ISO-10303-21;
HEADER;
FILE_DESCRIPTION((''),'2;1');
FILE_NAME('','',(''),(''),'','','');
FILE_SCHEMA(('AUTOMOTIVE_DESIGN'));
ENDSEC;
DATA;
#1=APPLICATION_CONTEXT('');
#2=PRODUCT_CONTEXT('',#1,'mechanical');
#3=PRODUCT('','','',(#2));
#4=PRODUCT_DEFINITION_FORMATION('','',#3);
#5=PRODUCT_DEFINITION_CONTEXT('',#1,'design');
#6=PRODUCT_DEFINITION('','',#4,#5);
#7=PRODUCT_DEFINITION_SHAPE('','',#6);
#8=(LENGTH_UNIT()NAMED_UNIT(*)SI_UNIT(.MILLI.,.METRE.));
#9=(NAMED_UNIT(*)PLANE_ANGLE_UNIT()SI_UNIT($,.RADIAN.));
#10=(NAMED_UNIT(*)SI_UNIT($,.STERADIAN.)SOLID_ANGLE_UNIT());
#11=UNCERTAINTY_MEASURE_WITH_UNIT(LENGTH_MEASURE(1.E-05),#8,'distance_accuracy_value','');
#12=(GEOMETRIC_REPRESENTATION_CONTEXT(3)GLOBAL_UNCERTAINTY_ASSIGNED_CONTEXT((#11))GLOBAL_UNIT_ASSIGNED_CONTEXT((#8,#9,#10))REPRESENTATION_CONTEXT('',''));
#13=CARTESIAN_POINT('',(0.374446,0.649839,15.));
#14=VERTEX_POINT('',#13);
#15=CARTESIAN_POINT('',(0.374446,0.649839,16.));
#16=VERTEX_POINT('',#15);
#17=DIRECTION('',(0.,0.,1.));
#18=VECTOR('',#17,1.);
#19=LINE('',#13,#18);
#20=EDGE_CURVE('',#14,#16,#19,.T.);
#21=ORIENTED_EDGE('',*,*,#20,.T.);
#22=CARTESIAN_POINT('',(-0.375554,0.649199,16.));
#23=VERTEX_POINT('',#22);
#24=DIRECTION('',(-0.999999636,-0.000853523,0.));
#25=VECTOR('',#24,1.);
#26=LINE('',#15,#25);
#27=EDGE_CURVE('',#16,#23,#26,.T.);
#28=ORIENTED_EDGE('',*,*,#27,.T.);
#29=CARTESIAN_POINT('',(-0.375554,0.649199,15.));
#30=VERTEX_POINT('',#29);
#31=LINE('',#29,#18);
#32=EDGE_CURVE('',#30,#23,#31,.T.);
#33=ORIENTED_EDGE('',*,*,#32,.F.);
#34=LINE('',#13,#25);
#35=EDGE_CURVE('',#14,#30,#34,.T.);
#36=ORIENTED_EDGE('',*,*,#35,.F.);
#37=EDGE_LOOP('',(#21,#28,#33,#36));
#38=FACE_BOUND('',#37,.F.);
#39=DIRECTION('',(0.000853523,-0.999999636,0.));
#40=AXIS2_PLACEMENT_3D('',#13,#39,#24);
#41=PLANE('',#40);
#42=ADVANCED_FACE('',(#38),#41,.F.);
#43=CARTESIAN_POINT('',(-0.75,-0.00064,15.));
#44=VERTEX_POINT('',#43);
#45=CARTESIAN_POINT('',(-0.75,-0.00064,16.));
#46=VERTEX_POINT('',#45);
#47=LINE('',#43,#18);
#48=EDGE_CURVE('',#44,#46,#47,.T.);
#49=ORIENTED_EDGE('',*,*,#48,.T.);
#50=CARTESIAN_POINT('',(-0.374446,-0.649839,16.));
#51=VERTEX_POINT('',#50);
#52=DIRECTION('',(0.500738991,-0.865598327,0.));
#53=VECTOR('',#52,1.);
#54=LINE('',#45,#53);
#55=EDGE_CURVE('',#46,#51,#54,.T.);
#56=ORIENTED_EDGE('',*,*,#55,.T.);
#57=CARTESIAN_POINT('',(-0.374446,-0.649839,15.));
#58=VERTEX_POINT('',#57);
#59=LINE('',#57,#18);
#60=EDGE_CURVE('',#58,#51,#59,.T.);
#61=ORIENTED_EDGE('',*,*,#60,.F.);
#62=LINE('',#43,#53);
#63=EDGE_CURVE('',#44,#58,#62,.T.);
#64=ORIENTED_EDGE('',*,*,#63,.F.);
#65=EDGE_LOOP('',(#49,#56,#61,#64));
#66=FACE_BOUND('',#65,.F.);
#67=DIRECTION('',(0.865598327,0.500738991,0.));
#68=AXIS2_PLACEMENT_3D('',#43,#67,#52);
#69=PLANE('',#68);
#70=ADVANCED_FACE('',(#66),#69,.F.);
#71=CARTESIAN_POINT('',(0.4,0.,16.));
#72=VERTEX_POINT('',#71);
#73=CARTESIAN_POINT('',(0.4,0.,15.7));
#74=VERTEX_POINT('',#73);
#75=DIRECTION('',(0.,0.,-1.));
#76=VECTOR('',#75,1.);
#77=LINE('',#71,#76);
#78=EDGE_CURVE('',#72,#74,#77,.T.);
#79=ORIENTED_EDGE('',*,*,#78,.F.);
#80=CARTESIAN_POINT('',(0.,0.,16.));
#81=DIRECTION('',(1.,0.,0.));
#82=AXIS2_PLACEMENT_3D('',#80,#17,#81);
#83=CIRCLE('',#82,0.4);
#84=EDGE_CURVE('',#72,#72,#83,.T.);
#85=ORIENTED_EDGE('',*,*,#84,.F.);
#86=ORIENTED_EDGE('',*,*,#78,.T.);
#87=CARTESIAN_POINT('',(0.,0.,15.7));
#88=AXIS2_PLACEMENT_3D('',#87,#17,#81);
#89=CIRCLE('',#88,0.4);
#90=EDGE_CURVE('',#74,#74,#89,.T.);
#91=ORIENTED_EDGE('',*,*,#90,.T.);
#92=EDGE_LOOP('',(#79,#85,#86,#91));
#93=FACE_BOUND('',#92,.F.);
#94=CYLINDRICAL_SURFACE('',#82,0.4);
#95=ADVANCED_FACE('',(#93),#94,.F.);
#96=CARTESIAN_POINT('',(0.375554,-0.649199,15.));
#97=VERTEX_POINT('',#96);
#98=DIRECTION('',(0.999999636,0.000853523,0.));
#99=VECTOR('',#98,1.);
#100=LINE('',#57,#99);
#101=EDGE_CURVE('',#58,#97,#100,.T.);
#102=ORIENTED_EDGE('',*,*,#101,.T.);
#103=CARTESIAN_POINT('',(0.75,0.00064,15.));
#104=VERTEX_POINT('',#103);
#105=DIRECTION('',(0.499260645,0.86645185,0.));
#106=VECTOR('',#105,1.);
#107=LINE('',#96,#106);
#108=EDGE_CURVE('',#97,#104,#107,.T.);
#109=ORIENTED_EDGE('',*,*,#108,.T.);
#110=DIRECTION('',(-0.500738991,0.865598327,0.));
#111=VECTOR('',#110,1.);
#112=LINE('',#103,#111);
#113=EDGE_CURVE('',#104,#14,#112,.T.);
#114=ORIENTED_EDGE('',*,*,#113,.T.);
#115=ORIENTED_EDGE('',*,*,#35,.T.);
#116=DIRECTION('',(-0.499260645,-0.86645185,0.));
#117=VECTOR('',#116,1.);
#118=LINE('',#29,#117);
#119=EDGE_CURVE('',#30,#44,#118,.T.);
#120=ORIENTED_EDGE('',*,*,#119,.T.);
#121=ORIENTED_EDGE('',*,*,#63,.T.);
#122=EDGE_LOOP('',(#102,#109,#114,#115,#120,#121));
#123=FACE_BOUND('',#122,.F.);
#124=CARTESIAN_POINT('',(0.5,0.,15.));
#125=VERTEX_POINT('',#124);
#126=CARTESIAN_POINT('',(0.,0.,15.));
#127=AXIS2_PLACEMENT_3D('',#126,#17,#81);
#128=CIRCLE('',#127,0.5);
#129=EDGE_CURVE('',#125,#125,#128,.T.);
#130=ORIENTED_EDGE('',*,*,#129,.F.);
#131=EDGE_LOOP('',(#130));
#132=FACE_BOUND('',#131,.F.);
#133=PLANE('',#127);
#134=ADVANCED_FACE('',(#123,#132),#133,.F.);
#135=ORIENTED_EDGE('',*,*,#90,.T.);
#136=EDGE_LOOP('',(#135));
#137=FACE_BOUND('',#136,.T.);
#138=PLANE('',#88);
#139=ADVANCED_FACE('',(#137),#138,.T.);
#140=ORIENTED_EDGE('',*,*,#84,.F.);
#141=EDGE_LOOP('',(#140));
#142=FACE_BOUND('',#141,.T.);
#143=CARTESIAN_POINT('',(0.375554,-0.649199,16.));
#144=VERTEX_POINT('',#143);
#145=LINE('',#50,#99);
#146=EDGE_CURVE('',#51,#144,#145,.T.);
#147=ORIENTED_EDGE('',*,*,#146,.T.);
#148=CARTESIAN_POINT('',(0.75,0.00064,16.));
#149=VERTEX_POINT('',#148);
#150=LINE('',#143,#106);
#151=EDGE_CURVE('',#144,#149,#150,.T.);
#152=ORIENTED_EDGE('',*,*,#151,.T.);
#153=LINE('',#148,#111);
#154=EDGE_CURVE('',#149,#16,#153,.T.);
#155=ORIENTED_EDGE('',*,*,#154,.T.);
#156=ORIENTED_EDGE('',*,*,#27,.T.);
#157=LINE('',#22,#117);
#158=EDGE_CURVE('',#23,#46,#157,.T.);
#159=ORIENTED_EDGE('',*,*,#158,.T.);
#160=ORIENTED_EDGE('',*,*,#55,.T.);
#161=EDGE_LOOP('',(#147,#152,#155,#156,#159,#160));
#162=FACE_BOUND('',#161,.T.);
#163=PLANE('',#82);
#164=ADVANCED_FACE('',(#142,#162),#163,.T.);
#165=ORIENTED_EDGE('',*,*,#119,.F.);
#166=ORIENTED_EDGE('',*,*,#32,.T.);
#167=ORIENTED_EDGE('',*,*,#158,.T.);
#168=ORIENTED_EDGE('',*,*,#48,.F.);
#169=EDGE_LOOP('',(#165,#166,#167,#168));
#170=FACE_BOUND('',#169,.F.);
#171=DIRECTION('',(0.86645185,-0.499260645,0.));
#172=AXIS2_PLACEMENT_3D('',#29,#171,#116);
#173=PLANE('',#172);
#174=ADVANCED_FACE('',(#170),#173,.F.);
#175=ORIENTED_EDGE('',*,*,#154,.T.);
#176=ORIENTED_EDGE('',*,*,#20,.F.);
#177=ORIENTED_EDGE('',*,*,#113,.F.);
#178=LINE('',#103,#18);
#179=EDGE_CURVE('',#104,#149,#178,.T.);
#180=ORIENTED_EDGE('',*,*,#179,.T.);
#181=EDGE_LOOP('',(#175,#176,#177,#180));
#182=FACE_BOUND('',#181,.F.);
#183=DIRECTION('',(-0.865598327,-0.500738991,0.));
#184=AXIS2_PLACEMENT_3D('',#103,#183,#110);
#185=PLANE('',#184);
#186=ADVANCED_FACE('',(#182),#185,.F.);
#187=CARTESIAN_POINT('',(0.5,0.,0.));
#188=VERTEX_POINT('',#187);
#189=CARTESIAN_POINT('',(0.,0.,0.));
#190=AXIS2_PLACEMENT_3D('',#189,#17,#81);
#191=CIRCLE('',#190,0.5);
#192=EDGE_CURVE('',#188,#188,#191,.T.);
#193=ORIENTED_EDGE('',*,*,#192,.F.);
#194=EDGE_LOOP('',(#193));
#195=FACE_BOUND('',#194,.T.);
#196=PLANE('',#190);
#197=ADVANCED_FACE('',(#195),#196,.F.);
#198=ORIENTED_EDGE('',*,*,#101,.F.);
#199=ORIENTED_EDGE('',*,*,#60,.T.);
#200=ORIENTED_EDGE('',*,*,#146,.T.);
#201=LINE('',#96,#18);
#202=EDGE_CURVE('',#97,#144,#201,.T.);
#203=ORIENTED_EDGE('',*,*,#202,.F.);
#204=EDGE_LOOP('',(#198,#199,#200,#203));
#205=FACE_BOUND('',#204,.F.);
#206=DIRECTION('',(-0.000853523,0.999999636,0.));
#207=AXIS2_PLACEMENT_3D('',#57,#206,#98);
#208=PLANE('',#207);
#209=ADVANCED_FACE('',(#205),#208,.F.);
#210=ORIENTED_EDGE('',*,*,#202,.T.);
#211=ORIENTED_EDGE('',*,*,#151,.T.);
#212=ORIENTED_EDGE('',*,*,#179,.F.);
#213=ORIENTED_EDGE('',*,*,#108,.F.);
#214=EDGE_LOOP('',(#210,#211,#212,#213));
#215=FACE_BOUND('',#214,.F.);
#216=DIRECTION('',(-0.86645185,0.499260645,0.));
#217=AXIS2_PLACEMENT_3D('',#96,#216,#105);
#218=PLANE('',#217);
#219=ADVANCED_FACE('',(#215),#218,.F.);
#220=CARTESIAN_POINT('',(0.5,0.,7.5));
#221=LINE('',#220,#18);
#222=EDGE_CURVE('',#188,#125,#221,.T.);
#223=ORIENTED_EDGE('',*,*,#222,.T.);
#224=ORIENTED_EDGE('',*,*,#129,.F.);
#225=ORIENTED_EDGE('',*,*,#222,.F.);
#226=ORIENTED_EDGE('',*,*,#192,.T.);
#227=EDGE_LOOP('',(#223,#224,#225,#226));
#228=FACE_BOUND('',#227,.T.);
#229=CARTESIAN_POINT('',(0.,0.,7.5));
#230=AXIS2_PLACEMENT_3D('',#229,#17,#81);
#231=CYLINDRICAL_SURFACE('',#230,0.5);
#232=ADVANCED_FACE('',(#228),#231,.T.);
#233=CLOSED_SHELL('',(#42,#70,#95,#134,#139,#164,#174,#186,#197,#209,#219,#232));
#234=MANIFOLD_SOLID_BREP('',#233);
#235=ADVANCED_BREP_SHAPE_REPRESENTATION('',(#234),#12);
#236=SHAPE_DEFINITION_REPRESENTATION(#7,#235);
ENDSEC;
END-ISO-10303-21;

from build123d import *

# Parameters (mm, degrees)
F0_W     = 0.5
F0_H     = 15
F2_R     = 0.5
F3_DEPTH = 1
F4_R     = 0.4
F5_DEPTH = 0.3


with BuildPart() as f1:
    # F0 (on Front) → F1 (revolve)
    with BuildSketch(Plane.XZ):
        with Locations((0.25, 7.5)):
            Rectangle(F0_W, F0_H)
    revolve(axis=Axis((0, 0, 7.5), (0, 0, 1)))

    # F2 (on face) → F3 (join)
    with BuildSketch(Plane.XY.offset(15)):
        Polygon((0.75, 0.0006401425), (0.3744456203, 0.6498391241), (-0.3755543797, 0.6491989816), (-0.75, -0.0006401425), (-0.3744456203, -0.6498391241), (0.3755543797, -0.6491989816), align=None)
        Circle(F2_R, mode=Mode.SUBTRACT)
        Circle(F2_R)
    extrude(amount=F3_DEPTH)

    # F4 (on face) → F5 (cut)
    with BuildSketch(Plane.XY.offset(16)):
        Circle(F4_R)
    extrude(amount=-F5_DEPTH, mode=Mode.SUBTRACT)


solid = f1.part
